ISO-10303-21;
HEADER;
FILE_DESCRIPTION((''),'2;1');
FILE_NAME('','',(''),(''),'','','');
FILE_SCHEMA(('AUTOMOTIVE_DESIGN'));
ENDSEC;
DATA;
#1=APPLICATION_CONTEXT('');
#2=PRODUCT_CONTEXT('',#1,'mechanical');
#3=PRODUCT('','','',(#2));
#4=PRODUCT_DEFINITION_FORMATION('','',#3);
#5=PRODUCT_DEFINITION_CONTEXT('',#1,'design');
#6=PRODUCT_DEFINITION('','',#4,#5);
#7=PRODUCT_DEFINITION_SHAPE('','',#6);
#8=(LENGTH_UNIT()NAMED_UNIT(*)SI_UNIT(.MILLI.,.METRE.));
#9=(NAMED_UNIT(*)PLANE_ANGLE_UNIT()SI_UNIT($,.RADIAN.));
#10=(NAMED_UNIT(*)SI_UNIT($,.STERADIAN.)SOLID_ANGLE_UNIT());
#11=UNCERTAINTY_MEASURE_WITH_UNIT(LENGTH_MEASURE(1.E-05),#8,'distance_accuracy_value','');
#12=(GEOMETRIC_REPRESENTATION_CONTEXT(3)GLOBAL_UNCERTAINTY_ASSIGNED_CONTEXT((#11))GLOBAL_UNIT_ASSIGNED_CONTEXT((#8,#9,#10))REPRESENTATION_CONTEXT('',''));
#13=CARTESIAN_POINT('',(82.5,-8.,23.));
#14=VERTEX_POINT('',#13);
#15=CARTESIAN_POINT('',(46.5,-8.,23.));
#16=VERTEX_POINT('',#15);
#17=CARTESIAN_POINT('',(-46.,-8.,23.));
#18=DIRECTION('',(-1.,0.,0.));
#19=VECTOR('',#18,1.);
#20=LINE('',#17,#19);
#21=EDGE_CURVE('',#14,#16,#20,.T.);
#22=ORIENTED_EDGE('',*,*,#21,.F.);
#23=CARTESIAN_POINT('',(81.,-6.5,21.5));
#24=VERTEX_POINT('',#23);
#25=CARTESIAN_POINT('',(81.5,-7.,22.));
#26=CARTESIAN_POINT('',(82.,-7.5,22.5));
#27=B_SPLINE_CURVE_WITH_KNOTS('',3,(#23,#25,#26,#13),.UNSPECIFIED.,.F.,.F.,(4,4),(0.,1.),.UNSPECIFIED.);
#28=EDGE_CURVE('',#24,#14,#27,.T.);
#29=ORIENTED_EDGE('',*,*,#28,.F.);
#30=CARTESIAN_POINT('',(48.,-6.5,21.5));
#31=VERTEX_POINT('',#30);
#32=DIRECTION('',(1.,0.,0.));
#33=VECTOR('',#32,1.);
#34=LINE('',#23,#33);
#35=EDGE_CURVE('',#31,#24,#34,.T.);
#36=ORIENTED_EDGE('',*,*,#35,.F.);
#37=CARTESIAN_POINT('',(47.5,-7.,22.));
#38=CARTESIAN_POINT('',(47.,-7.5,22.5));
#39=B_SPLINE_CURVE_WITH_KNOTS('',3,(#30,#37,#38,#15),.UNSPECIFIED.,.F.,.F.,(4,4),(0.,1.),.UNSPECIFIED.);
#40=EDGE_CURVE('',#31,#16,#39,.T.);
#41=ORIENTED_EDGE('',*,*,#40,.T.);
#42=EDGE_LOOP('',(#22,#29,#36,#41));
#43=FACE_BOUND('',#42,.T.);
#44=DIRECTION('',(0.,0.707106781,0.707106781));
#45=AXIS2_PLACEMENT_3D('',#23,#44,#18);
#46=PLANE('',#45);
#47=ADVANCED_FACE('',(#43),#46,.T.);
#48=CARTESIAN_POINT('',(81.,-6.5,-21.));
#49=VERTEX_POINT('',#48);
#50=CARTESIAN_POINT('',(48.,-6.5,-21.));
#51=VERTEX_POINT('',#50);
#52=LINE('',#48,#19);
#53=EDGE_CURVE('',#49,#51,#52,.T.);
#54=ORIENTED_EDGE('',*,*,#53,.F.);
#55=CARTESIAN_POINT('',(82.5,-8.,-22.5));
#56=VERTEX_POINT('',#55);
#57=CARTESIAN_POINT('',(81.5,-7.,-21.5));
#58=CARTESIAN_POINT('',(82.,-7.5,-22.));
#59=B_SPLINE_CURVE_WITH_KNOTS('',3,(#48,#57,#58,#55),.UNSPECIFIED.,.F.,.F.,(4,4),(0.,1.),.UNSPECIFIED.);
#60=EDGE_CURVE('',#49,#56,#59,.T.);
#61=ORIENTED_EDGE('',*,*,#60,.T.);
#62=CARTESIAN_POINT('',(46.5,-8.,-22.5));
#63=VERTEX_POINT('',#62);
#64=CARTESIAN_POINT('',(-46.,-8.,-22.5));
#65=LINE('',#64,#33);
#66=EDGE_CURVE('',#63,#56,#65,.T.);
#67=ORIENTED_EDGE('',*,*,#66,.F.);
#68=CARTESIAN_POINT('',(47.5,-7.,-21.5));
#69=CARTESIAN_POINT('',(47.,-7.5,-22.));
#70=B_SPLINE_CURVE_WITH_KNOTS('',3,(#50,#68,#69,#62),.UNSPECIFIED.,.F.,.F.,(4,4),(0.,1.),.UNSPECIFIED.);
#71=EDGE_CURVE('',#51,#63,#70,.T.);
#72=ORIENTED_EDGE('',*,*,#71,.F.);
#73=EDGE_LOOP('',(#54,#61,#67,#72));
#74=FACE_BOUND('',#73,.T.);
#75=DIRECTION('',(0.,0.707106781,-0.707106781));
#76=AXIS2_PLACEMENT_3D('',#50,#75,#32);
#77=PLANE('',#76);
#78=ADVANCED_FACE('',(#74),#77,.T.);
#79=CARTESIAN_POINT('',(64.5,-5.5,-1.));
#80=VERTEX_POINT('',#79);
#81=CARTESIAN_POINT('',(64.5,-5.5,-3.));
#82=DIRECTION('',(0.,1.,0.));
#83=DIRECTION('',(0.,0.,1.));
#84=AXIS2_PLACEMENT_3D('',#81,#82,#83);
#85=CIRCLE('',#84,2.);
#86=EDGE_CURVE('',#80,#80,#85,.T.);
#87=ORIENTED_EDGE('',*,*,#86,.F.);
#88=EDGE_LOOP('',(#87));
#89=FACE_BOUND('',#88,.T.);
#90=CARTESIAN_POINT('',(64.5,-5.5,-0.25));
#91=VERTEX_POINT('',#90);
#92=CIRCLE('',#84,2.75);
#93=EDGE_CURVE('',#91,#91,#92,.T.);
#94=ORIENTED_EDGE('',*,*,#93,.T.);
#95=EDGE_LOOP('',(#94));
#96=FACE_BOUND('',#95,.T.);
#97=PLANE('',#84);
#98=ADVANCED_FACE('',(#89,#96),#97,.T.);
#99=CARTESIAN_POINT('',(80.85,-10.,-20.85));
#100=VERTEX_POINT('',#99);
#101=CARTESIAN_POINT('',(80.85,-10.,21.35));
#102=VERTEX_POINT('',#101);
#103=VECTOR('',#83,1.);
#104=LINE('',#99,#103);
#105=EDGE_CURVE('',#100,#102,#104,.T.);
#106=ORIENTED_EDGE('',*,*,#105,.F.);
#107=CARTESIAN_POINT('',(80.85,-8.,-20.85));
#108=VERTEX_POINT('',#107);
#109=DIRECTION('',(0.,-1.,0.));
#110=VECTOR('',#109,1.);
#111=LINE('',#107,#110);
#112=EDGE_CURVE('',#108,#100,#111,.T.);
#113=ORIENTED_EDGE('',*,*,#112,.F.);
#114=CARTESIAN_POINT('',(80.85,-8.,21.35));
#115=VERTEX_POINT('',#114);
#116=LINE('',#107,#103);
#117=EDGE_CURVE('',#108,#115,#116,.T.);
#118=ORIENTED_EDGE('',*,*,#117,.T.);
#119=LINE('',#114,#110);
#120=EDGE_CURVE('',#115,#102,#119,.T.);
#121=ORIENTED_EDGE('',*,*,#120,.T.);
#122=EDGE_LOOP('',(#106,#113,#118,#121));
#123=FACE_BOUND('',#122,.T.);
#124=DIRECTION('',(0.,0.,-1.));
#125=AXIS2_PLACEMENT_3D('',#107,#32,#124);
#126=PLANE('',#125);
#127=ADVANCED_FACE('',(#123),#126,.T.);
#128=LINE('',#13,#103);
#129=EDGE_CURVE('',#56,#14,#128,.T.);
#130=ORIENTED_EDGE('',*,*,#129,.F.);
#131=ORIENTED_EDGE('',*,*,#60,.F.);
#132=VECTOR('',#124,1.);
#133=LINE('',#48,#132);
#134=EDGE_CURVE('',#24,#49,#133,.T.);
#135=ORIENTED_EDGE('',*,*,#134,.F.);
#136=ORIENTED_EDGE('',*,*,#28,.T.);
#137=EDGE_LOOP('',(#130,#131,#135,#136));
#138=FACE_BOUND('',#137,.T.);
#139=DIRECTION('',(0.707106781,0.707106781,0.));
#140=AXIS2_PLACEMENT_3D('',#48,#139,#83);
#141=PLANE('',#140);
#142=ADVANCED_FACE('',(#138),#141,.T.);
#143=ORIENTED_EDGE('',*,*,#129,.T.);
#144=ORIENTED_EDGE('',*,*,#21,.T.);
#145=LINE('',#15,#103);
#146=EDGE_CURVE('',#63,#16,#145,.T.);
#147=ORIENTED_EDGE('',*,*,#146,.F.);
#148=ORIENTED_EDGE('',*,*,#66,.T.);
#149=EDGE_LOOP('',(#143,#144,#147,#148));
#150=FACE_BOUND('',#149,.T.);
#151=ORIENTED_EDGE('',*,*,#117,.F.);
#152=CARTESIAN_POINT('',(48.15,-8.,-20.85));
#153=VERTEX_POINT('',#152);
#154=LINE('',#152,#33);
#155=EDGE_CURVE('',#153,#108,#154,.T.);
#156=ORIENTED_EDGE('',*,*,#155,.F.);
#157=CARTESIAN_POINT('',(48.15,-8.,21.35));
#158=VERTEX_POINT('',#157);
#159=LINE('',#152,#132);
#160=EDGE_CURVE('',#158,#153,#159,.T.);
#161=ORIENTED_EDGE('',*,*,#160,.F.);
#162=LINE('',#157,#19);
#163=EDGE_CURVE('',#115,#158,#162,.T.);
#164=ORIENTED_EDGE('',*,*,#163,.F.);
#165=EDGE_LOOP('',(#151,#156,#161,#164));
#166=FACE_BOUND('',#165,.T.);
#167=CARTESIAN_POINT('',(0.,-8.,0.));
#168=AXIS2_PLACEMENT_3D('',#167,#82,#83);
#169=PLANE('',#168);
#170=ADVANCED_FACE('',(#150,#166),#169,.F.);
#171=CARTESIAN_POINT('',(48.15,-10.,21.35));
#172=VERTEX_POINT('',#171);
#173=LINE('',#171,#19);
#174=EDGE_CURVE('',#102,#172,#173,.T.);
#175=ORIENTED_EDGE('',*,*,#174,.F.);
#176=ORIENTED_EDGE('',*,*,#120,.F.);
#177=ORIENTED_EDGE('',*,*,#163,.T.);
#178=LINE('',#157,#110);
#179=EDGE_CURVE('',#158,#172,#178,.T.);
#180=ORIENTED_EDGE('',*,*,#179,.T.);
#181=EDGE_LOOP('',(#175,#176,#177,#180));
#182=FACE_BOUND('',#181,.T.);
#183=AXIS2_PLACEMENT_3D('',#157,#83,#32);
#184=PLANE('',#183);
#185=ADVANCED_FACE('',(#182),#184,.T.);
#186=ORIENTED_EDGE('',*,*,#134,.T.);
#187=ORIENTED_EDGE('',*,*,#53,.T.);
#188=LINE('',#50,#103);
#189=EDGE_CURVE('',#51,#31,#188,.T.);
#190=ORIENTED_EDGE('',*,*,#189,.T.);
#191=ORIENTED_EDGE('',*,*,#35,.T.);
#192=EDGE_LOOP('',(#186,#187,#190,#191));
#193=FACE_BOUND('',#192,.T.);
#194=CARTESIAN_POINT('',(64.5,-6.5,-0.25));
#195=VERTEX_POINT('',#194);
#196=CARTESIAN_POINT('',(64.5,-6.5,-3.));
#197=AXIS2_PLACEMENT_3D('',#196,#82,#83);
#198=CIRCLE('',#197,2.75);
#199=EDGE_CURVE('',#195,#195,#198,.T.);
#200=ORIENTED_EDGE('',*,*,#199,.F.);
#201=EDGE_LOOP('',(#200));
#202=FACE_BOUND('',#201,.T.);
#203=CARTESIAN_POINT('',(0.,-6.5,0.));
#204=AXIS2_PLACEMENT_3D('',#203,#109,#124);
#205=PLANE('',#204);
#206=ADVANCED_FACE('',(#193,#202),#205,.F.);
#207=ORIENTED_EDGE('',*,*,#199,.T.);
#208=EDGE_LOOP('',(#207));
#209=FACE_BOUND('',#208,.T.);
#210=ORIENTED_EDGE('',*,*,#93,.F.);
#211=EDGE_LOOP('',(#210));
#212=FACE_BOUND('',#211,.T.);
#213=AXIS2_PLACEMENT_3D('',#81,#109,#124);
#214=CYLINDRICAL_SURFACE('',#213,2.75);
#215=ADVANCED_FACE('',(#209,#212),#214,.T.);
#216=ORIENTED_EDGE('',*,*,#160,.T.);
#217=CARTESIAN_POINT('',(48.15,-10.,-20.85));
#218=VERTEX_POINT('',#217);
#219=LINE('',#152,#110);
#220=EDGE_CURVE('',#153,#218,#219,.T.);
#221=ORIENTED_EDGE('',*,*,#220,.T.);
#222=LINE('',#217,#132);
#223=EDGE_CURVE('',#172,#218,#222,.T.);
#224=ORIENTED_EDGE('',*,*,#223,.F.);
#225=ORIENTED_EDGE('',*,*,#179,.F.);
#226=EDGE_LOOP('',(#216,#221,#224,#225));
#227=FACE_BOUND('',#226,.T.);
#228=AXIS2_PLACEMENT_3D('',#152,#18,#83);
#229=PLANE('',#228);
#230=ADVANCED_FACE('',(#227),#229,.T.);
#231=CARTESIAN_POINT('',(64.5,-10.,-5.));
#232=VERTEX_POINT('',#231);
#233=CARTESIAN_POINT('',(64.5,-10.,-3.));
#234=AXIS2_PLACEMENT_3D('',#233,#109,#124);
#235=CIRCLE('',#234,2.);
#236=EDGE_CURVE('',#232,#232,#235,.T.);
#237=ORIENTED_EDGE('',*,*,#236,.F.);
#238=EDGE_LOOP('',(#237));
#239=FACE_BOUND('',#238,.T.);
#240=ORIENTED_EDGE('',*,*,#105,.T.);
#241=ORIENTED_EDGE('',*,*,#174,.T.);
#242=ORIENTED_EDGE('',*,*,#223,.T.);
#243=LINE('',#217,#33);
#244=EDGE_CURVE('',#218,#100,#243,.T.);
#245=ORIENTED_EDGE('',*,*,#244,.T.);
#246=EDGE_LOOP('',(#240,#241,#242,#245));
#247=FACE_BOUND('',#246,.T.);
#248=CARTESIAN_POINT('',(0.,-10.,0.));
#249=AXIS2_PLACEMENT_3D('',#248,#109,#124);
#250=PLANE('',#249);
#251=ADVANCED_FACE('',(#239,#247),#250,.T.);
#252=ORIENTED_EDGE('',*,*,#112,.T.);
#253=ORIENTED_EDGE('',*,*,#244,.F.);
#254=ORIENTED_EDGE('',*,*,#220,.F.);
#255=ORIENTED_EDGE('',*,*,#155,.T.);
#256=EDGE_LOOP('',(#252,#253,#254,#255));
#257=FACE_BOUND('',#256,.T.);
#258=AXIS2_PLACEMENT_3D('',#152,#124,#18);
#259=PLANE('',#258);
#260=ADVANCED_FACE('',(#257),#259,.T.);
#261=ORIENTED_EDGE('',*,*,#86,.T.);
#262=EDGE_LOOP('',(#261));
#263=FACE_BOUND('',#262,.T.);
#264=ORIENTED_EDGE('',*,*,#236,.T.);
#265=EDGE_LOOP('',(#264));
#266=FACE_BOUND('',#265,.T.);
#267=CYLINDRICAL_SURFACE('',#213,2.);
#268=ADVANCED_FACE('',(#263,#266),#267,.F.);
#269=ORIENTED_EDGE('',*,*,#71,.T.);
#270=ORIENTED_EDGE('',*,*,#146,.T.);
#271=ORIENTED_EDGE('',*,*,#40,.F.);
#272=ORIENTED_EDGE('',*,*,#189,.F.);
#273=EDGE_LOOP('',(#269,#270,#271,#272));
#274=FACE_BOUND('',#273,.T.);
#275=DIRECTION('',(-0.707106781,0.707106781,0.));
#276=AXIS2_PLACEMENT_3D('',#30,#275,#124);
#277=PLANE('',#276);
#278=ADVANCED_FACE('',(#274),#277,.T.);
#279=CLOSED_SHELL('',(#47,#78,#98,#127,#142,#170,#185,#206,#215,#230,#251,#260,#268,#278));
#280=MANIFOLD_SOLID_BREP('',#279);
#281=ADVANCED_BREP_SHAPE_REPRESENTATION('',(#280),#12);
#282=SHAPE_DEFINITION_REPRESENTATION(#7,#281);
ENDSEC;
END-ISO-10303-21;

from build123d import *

# Parameters (mm, degrees)
TOP_EDGE_OUTLINE_W  = 86.5
TOP_EDGE_OUTLINE_H  = 39.5
TOP_EDGE_DEPTH      = 3
TOP_EDGE_DRAFT      = 45
SKETCH13_W          = 72
SKETCH13_H          = 25
DISPLAY_HOLE_DEPTH  = 6
SKETCH14_W          = 92.5
SKETCH14_H          = 45.5
SKETCH14_W_2        = 89.5
SKETCH14_H_2        = 42.5
BOSS_EXTRUDE5_DEPTH = 5
SKETCH15_W          = 128.5
SKETCH15_H          = 45.5
SKETCH15_W_2        = 89.5
SKETCH15_H_2        = 42.5
BOSS_EXTRUDE6_DEPTH = 2
SKETCH16_W          = 128.5
SKETCH16_H          = 45.5
SKETCH16_W_2        = 125.5
SKETCH16_H_2        = 42.5
BOSS_EXTRUDE7_DEPTH = 37
LOFT2_OUTLINE_W     = 33
LOFT2_OUTLINE_H     = 42.5
LOFT2_DEPTH         = 1.5
LOFT2_DRAFT         = 45
SKETCH19_R          = 2.75
SKETCH19_R_2        = 2
BOSS_EXTRUDE8_DEPTH = 1
CUT_EXTRUDE3_START  = -11
SKETCH20_R          = 2
CUT_EXTRUDE3_DEPTH  = 11
SKETCH21_W          = 12
SKETCH21_H          = 8
CUT_EXTRUDE4_DEPTH  = 11
SKETCH22_W          = 4
SKETCH22_H          = 15
BOSS_EXTRUDE9_DEPTH = 3
SKETCH24_W          = 42.5
SKETCH24_H          = 37
CUT_EXTRUDE5_DEPTH  = 17
SKETCH26_W          = 144.369132995
SKETCH26_H          = 91.038744315
CUT_EXTRUDE6_DEPTH  = 87
SKETCH27_W          = 64.71229982
SKETCH27_H          = 55.593249081
CUT_EXTRUDE7_DEPTH  = 148
SKETCH29_W          = 36
SKETCH29_H          = 45.5
SKETCH29_W_2        = 32.7
SKETCH29_H_2        = 42.2
CUT_EXTRUDE8_DEPTH  = 2


# Read off the part's stored shape, not the designer's step: Top Edge, Loft2
with BuildPart() as part:
    # Top Edge outline → Top Edge (with draft: the straight prism first)
    with BuildSketch(Plane(origin=(0, 0, 0), x_dir=(1, 0, 0), z_dir=(0, 1, 0))):
        with Locations((0.25, -0.25)):
            Rectangle(TOP_EDGE_OUTLINE_W, TOP_EDGE_OUTLINE_H)
    extrude(amount=-TOP_EDGE_DEPTH)
    # Top Edge: the draft: its side faces are tilted about the plane it starts from
    top_edge_sides = [part.faces().sort_by_distance(p)[0] for p in [
        (-43, -1.5, 0.25),
        (0.25, -1.5, 20),
        (43.5, -1.5, 0.25),
        (0.25, -1.5, -19.5),
    ]]
    draft(top_edge_sides, Plane(origin=(0, 0, 0), x_dir=(1, 0, 0), z_dir=(0, 1, 0)), TOP_EDGE_DRAFT)

    # Sketch13 → Display Hole (cut)
    with BuildSketch(Plane(origin=(0, 0, 0), x_dir=(1, 0, 0), z_dir=(0, 1, 0))):
        Rectangle(SKETCH13_W, SKETCH13_H)
    extrude(amount=-DISPLAY_HOLE_DEPTH, mode=Mode.SUBTRACT)

    # Sketch14 → Boss-Extrude5 (add)
    with BuildSketch(Plane.XZ.offset(3)):
        with Locations((0.25, 0.25)):
            Rectangle(SKETCH14_W, SKETCH14_H)
        with Locations((0.25, 0.25)):
            Rectangle(SKETCH14_W_2, SKETCH14_H_2, mode=Mode.SUBTRACT)
    extrude(amount=BOSS_EXTRUDE5_DEPTH)

    # Sketch15 → Boss-Extrude6 (add)
    with BuildSketch(Plane.XZ.offset(8)):
        with Locations((18.25, 0.25)):
            Rectangle(SKETCH15_W, SKETCH15_H)
        with Locations((0.25, 0.25)):
            Rectangle(SKETCH15_W_2, SKETCH15_H_2, mode=Mode.SUBTRACT)
    extrude(amount=BOSS_EXTRUDE6_DEPTH)

    # Sketch16 → Boss-Extrude7 (add)
    with BuildSketch(Plane.XZ.offset(10)):
        with Locations((18.25, 0.25)):
            Rectangle(SKETCH16_W, SKETCH16_H)
        with Locations((18.25, 0.25)):
            Rectangle(SKETCH16_W_2, SKETCH16_H_2, mode=Mode.SUBTRACT)
    extrude(amount=BOSS_EXTRUDE7_DEPTH)


with BuildPart() as loft2_tool:
    # Loft2 outline → Loft2 (with draft: the straight prism first)
    with BuildSketch(Plane(origin=(0, -6.5, 0), x_dir=(1, 0, 0), z_dir=(0, 1, 0))):
        with Locations((64.5, -0.25)):
            Rectangle(LOFT2_OUTLINE_W, LOFT2_OUTLINE_H)
    extrude(amount=-LOFT2_DEPTH)
    # Loft2: the draft: its side faces are tilted about the plane it starts from
    loft2_sides = [loft2_tool.faces().sort_by_distance(p)[0] for p in [
        (81, -7.25, 0.25),
        (64.5, -7.25, -21),
        (48, -7.25, 0.25),
        (64.5, -7.25, 21.5),
    ]]
    draft(loft2_sides, Plane(origin=(0, -6.5, 0), x_dir=(1, 0, 0), z_dir=(0, 1, 0)), LOFT2_DRAFT)


with BuildPart() as part_1:
    add(part.part)

    # Loft2: add loft2_tool
    add(loft2_tool.part)

    # Sketch19 → Boss-Extrude8 (add)
    with BuildSketch(Plane(origin=(0, -6.5, 0), x_dir=(1, 0, 0), z_dir=(0, 1, 0))):
        with Locations(Location((64.5, 3, 0), (0, 0, 270))):
            Circle(SKETCH19_R)
        with Locations(Location((64.5, 3, 0), (0, 0, 270))):
            Circle(SKETCH19_R_2, mode=Mode.SUBTRACT)
    extrude(amount=BOSS_EXTRUDE8_DEPTH)

    # Sketch20 → Cut-Extrude3 (cut)
    with BuildSketch(Plane(origin=(0, -6.5, 0), x_dir=(1, 0, 0), z_dir=(0, 1, 0)).offset(CUT_EXTRUDE3_START)):
        with Locations(Location((64.5, 3, 0), (0, 0, 90))):
            Circle(SKETCH20_R)
    extrude(amount=CUT_EXTRUDE3_DEPTH, mode=Mode.SUBTRACT)

    # Sketch21 → Cut-Extrude4 (cut)
    with BuildSketch(Plane(origin=(82.5, 0, 0), x_dir=(0, 0, -1), z_dir=(1, 0, 0))):
        with Locations((0, -43)):
            Rectangle(SKETCH21_W, SKETCH21_H)
    extrude(amount=-CUT_EXTRUDE4_DEPTH, mode=Mode.SUBTRACT)

    # Sketch22 → Boss-Extrude9 (add)
    with BuildSketch(Plane.XZ.offset(3)):
        with Locations((-38, 0)):
            Rectangle(SKETCH22_W, SKETCH22_H)
    extrude(amount=BOSS_EXTRUDE9_DEPTH)

    # Sketch24 → Cut-Extrude5 (cut)
    with BuildSketch(Plane.ZY.offset(-81)):
        with Locations((0.25, -28.5)):
            Rectangle(SKETCH24_W, SKETCH24_H)
    extrude(amount=-CUT_EXTRUDE5_DEPTH, mode=Mode.SUBTRACT)

    # Sketch26 → Cut-Extrude6 (cut)
    with BuildSketch(Plane.XZ.offset(10)):
        with Locations((18.609127197, -2.802581171)):
            Rectangle(SKETCH26_W, SKETCH26_H)
    extrude(amount=CUT_EXTRUDE6_DEPTH, mode=Mode.SUBTRACT)

    # Sketch27 → Cut-Extrude7 (cut)
    with BuildSketch(Plane(origin=(46.5, 0, 0), x_dir=(0, 0, -1), z_dir=(1, 0, 0))):
        with Locations((3.100976476, -7.362126245)):
            Rectangle(SKETCH27_W, SKETCH27_H)
    extrude(amount=-CUT_EXTRUDE7_DEPTH, mode=Mode.SUBTRACT)

    # Sketch29 → Cut-Extrude8 (cut)
    with BuildSketch(Plane.XZ.offset(10)):
        with Locations((64.5, 0.25)):
            Rectangle(SKETCH29_W, SKETCH29_H)
        with Locations((64.5, 0.25)):
            Rectangle(SKETCH29_W_2, SKETCH29_H_2, mode=Mode.SUBTRACT)
    extrude(amount=-CUT_EXTRUDE8_DEPTH, mode=Mode.SUBTRACT)


solid = part_1.part
